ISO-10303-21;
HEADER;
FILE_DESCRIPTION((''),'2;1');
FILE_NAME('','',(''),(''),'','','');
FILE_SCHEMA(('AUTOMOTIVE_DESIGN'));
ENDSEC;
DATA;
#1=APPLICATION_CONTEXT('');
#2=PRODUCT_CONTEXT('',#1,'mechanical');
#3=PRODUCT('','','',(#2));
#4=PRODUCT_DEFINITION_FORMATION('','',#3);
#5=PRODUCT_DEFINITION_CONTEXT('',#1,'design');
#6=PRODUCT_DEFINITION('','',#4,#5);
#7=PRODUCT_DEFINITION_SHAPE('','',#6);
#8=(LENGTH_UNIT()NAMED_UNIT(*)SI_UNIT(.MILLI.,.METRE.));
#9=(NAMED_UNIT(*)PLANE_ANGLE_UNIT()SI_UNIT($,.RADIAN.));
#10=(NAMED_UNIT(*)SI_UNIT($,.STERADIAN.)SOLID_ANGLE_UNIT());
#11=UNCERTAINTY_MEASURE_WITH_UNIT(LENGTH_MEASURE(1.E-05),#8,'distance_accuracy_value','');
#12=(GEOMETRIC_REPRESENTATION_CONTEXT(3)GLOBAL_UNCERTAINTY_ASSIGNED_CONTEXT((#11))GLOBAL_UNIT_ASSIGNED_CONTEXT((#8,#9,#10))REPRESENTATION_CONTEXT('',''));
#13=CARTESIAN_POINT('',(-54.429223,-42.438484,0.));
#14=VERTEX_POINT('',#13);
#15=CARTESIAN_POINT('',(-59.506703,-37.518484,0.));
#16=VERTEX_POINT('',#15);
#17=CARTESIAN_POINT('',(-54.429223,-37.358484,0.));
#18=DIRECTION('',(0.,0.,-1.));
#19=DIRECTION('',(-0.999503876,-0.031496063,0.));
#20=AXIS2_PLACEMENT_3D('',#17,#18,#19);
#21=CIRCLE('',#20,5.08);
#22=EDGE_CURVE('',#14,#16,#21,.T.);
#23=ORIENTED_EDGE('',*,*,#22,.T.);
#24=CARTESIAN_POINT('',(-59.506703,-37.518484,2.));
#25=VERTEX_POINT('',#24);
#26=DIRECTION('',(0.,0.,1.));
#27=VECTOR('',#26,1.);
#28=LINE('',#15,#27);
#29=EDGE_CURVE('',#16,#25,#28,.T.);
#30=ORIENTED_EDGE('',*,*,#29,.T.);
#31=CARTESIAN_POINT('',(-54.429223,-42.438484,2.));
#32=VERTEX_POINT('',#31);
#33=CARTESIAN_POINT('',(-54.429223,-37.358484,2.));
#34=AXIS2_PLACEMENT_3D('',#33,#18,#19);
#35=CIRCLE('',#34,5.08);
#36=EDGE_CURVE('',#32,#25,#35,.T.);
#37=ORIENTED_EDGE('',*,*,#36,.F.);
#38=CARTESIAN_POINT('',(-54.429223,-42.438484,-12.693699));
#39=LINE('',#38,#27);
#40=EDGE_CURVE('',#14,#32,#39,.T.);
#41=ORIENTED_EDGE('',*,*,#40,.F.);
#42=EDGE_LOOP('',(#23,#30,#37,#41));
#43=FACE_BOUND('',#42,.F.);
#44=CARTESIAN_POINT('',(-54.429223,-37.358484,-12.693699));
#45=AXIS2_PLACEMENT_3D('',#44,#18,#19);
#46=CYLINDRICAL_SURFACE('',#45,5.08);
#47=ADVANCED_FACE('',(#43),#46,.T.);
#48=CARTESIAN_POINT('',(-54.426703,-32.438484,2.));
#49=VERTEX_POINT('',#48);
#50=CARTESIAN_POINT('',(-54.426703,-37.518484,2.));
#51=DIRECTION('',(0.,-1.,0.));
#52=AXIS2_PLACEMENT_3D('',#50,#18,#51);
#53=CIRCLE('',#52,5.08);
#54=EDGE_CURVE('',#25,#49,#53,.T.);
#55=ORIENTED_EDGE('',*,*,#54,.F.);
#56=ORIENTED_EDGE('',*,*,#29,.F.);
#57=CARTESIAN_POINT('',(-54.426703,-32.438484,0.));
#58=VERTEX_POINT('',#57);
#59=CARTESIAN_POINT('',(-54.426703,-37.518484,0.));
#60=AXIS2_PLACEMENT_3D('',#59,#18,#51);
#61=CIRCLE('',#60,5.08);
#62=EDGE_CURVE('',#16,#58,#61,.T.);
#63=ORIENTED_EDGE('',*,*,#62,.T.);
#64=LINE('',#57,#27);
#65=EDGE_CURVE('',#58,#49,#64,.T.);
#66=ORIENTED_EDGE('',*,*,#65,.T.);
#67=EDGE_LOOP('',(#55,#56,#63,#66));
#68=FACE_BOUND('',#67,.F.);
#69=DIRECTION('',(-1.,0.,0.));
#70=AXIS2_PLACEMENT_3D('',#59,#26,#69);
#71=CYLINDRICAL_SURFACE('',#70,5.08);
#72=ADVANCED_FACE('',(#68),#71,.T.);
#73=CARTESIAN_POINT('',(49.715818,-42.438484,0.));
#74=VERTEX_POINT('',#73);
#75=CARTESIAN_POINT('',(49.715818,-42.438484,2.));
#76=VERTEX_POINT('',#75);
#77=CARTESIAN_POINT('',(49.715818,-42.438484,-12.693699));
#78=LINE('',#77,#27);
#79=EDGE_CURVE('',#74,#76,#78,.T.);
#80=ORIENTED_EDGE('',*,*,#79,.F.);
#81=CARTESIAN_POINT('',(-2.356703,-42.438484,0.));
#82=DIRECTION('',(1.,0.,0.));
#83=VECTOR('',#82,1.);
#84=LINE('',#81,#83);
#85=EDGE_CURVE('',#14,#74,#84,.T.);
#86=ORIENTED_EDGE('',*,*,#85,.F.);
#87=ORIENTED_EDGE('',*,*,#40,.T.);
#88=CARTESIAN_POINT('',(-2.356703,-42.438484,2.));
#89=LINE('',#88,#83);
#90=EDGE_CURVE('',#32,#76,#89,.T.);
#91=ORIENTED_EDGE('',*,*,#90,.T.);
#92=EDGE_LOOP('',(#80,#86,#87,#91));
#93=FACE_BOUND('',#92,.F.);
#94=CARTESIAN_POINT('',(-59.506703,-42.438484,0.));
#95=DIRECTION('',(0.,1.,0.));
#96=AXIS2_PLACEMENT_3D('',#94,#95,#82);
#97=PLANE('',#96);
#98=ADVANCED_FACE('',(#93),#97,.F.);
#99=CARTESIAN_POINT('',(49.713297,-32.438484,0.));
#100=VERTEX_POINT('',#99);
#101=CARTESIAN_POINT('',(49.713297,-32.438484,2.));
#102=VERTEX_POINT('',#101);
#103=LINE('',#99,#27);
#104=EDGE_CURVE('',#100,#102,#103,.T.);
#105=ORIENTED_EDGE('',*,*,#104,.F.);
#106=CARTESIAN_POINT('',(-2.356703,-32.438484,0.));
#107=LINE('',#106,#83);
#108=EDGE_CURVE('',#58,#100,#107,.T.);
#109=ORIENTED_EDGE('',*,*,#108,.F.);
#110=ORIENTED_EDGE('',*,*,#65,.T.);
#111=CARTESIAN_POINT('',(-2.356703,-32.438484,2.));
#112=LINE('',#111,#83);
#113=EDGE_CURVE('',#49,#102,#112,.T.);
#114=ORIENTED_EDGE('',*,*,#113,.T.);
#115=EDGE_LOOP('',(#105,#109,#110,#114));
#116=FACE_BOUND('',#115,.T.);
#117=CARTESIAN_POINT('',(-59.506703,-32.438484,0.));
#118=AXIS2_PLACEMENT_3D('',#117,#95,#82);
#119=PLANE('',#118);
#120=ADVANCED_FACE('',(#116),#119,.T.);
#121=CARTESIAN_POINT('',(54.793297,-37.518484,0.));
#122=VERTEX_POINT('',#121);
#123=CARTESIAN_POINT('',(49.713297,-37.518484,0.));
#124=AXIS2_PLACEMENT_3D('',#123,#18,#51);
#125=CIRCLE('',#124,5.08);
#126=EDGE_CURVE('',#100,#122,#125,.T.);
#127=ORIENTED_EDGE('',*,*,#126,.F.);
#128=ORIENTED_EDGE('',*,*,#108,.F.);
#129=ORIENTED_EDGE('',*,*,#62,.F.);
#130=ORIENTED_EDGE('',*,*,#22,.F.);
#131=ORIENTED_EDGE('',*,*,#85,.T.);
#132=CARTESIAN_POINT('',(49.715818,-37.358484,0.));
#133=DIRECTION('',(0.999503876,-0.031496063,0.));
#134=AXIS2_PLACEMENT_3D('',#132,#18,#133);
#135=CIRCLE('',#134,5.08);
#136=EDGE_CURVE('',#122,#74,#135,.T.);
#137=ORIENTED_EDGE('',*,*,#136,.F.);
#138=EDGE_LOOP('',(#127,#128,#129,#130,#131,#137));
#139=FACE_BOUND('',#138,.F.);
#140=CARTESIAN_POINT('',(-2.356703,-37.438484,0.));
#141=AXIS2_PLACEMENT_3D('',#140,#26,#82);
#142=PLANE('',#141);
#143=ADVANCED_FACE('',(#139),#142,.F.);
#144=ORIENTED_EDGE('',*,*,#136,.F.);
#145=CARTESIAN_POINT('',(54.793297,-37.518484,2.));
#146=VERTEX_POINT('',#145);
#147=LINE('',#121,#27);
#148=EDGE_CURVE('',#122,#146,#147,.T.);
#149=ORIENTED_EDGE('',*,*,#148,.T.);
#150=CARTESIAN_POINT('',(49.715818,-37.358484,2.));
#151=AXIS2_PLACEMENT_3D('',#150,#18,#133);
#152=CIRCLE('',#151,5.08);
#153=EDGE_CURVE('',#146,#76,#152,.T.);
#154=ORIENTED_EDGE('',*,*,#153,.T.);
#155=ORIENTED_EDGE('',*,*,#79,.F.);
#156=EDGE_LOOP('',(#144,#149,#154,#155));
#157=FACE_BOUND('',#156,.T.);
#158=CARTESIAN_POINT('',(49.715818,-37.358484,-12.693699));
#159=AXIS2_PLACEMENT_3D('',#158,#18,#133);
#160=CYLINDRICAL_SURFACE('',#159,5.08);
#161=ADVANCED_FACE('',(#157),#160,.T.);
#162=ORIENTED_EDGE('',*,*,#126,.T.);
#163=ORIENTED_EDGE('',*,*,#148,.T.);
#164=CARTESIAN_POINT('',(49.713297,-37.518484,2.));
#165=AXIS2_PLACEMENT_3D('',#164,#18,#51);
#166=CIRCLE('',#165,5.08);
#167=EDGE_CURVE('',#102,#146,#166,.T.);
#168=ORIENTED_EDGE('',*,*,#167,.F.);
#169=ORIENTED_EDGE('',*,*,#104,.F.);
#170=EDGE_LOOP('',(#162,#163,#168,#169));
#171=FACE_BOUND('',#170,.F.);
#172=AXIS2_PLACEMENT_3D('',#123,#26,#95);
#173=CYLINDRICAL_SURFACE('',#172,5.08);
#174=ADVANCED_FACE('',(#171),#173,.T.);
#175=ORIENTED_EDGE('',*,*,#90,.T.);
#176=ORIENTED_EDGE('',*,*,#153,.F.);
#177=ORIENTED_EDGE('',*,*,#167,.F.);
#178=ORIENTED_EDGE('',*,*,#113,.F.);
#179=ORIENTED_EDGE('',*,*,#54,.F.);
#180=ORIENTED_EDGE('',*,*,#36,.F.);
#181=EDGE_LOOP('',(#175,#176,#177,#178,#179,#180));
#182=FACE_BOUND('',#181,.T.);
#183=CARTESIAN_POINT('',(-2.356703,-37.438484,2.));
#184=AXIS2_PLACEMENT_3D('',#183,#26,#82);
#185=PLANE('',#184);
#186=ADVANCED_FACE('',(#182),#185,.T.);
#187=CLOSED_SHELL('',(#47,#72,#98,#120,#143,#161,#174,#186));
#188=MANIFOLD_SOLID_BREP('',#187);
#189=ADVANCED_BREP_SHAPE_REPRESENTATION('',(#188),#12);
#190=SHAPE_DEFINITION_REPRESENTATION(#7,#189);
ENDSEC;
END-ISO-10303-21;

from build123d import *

# Parameters (mm, degrees)
F0_W        = 114.3
F0_H        = 10
F1_DEPTH    = 2
F2_R        = 5.08
F3_R        = 5.08
F4_T1_DEPTH = 27.3873984488
F5_T1_DEPTH = 27.3873984488


# Not quite as in the source:
# - a fillet or chamfer that OpenCascade refuses, or shapes differently, is made with other operations: its cross-section is extruded or revolved along the edge and cut away or added


with BuildPart() as f1:
    # F0 (on Top) → F1 (new body)
    with BuildSketch(Plane.XY):
        with Locations((-2.3567027405, -37.438484022)):
            Rectangle(F0_W, F0_H)
    extrude(amount=F1_DEPTH)

    # F2
    f2_edges = [f1.edges().sort_by_distance(p)[0] for p in [
        (-59.506703, -32.438484, 1),
    ]]
    fillet(f2_edges, radius=F2_R)

    # F3
    f3_edges = [f1.edges().sort_by_distance(p)[0] for p in [
        (54.793297, -32.438484, 1),
    ]]
    fillet(f3_edges, radius=F3_R)

    # F4: fillet of radius 5.08 on 1 edges, made by hand

    # F4_s2 → F4_t1 (cut)
    with BuildSketch(Plane.XY.offset(-12.6936992244)):
        with BuildLine():
            ThreePointArc((-59.5067027405, -37.518484022), (-57.9643043793, -41.0067164708), (-54.4292230507, -42.438484022))
            Line((-54.4292230507, -42.438484022), (-59.5067027405, -42.438484022))
            Line((-59.5067027405, -42.438484022), (-59.5067027405, -37.518484022))
        make_face()
    extrude(amount=F4_T1_DEPTH, mode=Mode.SUBTRACT)

    # F5: fillet of radius 5.08 on 1 edges, made by hand

    # F5_s2 → F5_t1 (cut)
    with BuildSketch(Plane.XY.offset(-12.6936992244)):
        with BuildLine():
            ThreePointArc((54.7932972595, -37.518484022), (53.2508988984, -41.0067164708), (49.7158175697, -42.438484022))
            Line((49.7158175697, -42.438484022), (54.7932972595, -42.438484022))
            Line((54.7932972595, -42.438484022), (54.7932972595, -37.518484022))
        make_face()
    extrude(amount=F5_T1_DEPTH, mode=Mode.SUBTRACT)


solid = f1.part
